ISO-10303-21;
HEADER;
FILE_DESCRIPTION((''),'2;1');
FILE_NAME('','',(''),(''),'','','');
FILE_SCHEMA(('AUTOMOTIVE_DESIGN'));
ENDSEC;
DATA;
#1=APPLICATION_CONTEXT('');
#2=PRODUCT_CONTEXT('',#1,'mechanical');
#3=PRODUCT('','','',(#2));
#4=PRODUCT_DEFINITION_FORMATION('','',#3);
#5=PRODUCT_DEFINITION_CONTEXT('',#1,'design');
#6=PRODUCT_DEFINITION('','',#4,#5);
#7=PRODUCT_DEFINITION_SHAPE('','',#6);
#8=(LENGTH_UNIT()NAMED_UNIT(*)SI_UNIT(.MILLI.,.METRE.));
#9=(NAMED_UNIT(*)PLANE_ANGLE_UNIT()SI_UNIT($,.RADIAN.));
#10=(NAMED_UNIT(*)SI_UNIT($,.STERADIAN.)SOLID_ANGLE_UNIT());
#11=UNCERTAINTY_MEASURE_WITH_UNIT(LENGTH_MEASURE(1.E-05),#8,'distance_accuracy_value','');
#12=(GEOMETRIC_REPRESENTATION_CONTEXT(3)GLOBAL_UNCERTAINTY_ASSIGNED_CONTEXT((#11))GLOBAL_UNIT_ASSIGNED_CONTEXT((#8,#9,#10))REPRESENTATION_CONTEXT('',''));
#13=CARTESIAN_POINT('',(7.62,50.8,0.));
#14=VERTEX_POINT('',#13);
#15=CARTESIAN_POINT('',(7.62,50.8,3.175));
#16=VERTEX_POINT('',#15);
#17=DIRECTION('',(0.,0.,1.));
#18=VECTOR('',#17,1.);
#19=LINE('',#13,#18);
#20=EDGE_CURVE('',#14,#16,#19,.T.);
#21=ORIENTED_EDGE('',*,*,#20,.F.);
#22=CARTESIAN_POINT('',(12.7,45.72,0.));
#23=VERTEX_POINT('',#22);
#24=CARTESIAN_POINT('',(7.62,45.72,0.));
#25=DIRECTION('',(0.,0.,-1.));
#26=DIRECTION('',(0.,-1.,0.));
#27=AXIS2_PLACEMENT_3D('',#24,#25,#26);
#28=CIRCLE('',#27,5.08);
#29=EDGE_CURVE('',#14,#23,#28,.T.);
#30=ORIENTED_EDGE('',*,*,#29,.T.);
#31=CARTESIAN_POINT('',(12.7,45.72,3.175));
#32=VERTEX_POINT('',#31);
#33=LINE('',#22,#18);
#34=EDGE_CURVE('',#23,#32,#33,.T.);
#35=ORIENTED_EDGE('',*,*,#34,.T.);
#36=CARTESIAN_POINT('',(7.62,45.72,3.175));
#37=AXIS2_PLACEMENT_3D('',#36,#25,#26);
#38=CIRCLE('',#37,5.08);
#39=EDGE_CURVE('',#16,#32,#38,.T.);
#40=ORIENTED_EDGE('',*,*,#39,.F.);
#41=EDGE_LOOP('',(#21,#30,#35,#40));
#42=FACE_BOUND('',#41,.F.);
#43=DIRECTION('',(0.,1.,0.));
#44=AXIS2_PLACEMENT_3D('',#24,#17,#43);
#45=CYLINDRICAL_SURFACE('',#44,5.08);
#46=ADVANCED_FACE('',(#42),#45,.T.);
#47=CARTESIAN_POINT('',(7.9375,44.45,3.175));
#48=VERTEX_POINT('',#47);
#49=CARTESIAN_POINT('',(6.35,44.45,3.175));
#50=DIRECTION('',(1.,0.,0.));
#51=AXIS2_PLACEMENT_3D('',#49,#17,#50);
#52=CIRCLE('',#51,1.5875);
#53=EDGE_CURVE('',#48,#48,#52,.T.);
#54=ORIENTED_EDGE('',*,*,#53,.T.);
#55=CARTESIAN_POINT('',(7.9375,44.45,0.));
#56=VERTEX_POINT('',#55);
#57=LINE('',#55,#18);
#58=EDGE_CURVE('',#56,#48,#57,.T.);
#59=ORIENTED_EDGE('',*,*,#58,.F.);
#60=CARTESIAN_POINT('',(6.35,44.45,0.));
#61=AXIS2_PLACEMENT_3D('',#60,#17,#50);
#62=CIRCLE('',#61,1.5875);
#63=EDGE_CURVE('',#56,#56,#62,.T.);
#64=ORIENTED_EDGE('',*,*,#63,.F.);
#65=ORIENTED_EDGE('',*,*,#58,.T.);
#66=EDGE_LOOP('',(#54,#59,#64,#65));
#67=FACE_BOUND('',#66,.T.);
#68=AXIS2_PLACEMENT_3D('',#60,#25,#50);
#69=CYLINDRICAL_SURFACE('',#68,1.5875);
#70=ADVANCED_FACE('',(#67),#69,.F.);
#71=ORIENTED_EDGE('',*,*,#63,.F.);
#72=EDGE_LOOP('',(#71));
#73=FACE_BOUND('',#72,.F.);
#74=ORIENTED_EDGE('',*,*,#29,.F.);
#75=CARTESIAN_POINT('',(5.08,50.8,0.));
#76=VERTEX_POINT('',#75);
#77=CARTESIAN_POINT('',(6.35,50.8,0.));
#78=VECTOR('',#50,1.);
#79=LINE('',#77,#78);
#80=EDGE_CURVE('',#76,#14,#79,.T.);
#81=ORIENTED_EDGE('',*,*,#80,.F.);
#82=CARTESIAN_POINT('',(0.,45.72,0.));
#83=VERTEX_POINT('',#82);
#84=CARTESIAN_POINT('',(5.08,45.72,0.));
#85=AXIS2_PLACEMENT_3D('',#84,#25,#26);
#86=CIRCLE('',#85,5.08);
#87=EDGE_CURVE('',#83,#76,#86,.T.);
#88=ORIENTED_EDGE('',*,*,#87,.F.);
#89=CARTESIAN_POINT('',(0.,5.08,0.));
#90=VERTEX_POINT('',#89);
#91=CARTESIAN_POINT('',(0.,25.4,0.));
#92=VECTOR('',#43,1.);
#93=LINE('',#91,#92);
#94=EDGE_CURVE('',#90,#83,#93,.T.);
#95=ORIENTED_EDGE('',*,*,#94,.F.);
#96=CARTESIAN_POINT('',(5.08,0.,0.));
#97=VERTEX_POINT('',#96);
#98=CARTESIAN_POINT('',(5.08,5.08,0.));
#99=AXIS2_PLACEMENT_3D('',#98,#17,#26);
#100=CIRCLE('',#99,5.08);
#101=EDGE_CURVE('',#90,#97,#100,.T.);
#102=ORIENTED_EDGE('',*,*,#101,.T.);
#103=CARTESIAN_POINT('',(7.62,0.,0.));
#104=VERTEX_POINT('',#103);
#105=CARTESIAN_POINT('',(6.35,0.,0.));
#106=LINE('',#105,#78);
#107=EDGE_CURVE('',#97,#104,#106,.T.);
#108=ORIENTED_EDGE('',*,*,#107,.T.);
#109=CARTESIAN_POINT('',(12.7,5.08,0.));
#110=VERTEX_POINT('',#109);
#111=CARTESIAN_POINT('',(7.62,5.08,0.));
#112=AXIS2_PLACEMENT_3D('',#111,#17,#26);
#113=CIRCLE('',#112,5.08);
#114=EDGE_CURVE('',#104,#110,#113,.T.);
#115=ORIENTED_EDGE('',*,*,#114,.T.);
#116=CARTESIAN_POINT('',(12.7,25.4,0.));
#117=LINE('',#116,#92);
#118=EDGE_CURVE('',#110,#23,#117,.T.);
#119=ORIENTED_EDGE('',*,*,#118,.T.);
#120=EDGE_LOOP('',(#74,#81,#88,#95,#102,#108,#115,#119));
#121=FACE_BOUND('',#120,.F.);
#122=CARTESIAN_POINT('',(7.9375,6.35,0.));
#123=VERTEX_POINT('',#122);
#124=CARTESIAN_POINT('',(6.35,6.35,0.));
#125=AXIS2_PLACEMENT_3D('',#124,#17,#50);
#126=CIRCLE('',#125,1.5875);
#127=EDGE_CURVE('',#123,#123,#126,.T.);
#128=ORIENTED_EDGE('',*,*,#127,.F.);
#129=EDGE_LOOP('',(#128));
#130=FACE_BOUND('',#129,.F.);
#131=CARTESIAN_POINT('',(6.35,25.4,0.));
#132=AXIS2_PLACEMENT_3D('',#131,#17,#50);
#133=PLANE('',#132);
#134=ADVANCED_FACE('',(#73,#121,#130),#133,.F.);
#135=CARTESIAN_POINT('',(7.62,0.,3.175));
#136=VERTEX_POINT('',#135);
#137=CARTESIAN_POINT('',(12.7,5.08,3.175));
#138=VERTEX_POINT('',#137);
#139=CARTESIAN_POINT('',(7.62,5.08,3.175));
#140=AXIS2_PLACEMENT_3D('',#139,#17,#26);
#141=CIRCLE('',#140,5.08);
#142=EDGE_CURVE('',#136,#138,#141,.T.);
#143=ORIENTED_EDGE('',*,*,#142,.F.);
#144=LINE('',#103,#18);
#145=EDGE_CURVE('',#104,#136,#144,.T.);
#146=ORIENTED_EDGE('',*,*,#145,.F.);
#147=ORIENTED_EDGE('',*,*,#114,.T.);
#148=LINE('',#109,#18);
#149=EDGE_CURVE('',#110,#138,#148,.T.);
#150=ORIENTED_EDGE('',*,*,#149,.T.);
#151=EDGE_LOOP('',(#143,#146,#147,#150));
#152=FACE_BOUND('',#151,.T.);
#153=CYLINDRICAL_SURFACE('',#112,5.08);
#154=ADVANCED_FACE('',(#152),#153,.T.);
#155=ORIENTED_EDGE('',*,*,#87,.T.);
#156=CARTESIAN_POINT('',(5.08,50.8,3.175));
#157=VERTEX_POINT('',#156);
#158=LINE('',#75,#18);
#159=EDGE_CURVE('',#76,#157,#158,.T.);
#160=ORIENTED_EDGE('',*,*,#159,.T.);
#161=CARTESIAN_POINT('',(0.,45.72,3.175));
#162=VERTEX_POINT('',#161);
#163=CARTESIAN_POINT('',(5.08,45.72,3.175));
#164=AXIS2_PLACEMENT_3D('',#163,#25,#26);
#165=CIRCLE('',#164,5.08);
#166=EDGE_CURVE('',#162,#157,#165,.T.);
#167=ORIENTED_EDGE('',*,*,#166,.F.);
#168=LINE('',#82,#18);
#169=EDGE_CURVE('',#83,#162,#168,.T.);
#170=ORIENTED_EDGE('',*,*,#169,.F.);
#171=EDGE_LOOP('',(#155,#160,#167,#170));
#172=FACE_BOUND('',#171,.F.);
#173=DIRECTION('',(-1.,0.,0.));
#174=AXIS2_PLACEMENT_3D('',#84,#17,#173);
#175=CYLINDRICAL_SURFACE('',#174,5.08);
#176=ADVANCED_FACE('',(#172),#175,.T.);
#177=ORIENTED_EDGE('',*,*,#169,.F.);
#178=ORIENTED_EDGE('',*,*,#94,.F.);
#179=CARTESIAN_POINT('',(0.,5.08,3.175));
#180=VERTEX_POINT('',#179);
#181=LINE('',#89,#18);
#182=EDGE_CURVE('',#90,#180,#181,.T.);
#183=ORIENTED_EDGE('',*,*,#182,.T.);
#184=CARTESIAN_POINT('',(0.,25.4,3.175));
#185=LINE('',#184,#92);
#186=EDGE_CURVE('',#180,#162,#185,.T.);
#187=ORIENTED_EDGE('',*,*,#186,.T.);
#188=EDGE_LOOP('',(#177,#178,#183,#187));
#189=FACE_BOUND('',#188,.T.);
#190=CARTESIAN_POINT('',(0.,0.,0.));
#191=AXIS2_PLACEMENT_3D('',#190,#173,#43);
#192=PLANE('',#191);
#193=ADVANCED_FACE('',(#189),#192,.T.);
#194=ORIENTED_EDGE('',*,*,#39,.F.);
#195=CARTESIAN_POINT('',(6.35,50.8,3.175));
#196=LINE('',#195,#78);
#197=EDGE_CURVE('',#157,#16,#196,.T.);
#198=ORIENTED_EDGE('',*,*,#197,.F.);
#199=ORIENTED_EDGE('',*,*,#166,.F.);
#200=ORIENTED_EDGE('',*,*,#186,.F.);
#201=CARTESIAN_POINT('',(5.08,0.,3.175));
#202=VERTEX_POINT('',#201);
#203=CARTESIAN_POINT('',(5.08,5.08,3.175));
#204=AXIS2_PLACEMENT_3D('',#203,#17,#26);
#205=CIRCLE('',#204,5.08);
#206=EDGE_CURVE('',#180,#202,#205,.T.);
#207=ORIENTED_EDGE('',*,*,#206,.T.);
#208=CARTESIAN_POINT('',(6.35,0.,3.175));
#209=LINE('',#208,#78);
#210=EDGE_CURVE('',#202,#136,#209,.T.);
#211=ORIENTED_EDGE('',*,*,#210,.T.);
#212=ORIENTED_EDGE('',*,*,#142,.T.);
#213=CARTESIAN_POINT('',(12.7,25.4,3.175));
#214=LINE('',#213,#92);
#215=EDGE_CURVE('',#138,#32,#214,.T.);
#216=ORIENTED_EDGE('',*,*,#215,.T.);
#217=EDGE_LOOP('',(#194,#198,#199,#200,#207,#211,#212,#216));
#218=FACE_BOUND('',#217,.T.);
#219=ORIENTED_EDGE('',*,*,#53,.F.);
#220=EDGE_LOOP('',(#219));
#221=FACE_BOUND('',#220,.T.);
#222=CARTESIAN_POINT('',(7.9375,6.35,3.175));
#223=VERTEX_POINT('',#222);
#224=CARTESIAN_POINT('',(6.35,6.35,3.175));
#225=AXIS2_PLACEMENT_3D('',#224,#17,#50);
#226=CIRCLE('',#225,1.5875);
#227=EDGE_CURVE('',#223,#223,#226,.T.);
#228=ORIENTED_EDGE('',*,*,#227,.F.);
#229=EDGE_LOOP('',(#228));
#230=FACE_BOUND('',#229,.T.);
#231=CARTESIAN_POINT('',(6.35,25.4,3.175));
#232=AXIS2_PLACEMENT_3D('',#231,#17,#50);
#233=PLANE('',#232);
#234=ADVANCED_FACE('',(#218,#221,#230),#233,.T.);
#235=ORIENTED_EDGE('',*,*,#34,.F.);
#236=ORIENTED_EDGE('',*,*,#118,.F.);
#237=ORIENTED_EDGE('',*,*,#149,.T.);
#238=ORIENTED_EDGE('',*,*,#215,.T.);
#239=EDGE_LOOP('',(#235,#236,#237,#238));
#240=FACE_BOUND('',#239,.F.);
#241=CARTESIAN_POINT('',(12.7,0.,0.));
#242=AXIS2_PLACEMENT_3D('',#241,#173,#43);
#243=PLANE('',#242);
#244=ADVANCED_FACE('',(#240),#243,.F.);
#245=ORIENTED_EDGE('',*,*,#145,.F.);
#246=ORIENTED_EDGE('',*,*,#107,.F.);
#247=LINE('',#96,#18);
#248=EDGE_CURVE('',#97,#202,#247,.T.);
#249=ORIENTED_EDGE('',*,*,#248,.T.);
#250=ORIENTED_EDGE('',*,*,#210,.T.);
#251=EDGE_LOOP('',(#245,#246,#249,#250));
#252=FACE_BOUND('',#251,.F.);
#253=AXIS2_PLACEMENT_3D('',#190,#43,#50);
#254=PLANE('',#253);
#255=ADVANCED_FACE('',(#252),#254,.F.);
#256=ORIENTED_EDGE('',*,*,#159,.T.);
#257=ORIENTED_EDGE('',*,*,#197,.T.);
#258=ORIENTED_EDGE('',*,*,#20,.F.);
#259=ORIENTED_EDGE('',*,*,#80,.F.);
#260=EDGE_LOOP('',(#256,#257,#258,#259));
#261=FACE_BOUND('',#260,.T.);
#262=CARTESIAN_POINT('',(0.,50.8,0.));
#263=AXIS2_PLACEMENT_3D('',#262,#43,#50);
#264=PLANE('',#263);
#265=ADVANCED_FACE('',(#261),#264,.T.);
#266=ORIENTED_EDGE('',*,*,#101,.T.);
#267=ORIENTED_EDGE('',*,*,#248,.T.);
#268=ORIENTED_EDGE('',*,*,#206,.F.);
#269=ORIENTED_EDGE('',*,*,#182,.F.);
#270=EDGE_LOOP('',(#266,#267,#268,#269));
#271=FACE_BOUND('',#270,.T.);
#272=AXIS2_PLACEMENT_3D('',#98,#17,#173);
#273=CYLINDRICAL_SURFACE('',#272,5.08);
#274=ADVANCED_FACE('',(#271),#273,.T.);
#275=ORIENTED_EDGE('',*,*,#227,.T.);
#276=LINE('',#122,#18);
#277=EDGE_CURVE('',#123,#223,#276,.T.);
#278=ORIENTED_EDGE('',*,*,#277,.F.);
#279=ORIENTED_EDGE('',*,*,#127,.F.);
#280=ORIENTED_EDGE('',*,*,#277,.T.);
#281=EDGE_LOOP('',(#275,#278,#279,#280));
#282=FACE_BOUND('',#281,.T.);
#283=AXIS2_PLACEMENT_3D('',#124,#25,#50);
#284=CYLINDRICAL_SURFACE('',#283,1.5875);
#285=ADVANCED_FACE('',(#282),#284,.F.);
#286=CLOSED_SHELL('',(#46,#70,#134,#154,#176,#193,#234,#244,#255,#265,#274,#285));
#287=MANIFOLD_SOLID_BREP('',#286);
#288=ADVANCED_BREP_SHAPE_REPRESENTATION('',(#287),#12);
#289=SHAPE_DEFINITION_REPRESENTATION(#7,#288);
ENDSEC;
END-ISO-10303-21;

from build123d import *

# Parameters (mm, degrees)
F0_W     = 12.7
F0_H     = 50.8
F0_R     = 1.5875
F1_DEPTH = 3.175
F2_R     = 5.08


# Not quite as in the source:
# - a length typed as a fraction of an inch, garbled in the dataset ("3 / 203.2 mm" for 3/8 in), is restored


with BuildPart() as f1:
    # F0 (on Top) → F1 (new body)
    with BuildSketch(Plane.XY):
        with Locations((6.35, 25.4)):
            Rectangle(F0_W, F0_H)
        with Locations((6.35, 6.35)):
            Circle(F0_R, mode=Mode.SUBTRACT)
        with Locations((6.35, 44.45)):
            Circle(F0_R, mode=Mode.SUBTRACT)
    extrude(amount=F1_DEPTH)

    # F2
    f2_edges = [f1.edges().sort_by_distance(p)[0] for p in [
        (12.7, 0, 1.5875),
        (0, 0, 1.5875),
        (12.7, 50.8, 1.5875),
        (0, 50.8, 1.5875),
    ]]
    fillet(f2_edges, radius=F2_R)


solid = f1.part
